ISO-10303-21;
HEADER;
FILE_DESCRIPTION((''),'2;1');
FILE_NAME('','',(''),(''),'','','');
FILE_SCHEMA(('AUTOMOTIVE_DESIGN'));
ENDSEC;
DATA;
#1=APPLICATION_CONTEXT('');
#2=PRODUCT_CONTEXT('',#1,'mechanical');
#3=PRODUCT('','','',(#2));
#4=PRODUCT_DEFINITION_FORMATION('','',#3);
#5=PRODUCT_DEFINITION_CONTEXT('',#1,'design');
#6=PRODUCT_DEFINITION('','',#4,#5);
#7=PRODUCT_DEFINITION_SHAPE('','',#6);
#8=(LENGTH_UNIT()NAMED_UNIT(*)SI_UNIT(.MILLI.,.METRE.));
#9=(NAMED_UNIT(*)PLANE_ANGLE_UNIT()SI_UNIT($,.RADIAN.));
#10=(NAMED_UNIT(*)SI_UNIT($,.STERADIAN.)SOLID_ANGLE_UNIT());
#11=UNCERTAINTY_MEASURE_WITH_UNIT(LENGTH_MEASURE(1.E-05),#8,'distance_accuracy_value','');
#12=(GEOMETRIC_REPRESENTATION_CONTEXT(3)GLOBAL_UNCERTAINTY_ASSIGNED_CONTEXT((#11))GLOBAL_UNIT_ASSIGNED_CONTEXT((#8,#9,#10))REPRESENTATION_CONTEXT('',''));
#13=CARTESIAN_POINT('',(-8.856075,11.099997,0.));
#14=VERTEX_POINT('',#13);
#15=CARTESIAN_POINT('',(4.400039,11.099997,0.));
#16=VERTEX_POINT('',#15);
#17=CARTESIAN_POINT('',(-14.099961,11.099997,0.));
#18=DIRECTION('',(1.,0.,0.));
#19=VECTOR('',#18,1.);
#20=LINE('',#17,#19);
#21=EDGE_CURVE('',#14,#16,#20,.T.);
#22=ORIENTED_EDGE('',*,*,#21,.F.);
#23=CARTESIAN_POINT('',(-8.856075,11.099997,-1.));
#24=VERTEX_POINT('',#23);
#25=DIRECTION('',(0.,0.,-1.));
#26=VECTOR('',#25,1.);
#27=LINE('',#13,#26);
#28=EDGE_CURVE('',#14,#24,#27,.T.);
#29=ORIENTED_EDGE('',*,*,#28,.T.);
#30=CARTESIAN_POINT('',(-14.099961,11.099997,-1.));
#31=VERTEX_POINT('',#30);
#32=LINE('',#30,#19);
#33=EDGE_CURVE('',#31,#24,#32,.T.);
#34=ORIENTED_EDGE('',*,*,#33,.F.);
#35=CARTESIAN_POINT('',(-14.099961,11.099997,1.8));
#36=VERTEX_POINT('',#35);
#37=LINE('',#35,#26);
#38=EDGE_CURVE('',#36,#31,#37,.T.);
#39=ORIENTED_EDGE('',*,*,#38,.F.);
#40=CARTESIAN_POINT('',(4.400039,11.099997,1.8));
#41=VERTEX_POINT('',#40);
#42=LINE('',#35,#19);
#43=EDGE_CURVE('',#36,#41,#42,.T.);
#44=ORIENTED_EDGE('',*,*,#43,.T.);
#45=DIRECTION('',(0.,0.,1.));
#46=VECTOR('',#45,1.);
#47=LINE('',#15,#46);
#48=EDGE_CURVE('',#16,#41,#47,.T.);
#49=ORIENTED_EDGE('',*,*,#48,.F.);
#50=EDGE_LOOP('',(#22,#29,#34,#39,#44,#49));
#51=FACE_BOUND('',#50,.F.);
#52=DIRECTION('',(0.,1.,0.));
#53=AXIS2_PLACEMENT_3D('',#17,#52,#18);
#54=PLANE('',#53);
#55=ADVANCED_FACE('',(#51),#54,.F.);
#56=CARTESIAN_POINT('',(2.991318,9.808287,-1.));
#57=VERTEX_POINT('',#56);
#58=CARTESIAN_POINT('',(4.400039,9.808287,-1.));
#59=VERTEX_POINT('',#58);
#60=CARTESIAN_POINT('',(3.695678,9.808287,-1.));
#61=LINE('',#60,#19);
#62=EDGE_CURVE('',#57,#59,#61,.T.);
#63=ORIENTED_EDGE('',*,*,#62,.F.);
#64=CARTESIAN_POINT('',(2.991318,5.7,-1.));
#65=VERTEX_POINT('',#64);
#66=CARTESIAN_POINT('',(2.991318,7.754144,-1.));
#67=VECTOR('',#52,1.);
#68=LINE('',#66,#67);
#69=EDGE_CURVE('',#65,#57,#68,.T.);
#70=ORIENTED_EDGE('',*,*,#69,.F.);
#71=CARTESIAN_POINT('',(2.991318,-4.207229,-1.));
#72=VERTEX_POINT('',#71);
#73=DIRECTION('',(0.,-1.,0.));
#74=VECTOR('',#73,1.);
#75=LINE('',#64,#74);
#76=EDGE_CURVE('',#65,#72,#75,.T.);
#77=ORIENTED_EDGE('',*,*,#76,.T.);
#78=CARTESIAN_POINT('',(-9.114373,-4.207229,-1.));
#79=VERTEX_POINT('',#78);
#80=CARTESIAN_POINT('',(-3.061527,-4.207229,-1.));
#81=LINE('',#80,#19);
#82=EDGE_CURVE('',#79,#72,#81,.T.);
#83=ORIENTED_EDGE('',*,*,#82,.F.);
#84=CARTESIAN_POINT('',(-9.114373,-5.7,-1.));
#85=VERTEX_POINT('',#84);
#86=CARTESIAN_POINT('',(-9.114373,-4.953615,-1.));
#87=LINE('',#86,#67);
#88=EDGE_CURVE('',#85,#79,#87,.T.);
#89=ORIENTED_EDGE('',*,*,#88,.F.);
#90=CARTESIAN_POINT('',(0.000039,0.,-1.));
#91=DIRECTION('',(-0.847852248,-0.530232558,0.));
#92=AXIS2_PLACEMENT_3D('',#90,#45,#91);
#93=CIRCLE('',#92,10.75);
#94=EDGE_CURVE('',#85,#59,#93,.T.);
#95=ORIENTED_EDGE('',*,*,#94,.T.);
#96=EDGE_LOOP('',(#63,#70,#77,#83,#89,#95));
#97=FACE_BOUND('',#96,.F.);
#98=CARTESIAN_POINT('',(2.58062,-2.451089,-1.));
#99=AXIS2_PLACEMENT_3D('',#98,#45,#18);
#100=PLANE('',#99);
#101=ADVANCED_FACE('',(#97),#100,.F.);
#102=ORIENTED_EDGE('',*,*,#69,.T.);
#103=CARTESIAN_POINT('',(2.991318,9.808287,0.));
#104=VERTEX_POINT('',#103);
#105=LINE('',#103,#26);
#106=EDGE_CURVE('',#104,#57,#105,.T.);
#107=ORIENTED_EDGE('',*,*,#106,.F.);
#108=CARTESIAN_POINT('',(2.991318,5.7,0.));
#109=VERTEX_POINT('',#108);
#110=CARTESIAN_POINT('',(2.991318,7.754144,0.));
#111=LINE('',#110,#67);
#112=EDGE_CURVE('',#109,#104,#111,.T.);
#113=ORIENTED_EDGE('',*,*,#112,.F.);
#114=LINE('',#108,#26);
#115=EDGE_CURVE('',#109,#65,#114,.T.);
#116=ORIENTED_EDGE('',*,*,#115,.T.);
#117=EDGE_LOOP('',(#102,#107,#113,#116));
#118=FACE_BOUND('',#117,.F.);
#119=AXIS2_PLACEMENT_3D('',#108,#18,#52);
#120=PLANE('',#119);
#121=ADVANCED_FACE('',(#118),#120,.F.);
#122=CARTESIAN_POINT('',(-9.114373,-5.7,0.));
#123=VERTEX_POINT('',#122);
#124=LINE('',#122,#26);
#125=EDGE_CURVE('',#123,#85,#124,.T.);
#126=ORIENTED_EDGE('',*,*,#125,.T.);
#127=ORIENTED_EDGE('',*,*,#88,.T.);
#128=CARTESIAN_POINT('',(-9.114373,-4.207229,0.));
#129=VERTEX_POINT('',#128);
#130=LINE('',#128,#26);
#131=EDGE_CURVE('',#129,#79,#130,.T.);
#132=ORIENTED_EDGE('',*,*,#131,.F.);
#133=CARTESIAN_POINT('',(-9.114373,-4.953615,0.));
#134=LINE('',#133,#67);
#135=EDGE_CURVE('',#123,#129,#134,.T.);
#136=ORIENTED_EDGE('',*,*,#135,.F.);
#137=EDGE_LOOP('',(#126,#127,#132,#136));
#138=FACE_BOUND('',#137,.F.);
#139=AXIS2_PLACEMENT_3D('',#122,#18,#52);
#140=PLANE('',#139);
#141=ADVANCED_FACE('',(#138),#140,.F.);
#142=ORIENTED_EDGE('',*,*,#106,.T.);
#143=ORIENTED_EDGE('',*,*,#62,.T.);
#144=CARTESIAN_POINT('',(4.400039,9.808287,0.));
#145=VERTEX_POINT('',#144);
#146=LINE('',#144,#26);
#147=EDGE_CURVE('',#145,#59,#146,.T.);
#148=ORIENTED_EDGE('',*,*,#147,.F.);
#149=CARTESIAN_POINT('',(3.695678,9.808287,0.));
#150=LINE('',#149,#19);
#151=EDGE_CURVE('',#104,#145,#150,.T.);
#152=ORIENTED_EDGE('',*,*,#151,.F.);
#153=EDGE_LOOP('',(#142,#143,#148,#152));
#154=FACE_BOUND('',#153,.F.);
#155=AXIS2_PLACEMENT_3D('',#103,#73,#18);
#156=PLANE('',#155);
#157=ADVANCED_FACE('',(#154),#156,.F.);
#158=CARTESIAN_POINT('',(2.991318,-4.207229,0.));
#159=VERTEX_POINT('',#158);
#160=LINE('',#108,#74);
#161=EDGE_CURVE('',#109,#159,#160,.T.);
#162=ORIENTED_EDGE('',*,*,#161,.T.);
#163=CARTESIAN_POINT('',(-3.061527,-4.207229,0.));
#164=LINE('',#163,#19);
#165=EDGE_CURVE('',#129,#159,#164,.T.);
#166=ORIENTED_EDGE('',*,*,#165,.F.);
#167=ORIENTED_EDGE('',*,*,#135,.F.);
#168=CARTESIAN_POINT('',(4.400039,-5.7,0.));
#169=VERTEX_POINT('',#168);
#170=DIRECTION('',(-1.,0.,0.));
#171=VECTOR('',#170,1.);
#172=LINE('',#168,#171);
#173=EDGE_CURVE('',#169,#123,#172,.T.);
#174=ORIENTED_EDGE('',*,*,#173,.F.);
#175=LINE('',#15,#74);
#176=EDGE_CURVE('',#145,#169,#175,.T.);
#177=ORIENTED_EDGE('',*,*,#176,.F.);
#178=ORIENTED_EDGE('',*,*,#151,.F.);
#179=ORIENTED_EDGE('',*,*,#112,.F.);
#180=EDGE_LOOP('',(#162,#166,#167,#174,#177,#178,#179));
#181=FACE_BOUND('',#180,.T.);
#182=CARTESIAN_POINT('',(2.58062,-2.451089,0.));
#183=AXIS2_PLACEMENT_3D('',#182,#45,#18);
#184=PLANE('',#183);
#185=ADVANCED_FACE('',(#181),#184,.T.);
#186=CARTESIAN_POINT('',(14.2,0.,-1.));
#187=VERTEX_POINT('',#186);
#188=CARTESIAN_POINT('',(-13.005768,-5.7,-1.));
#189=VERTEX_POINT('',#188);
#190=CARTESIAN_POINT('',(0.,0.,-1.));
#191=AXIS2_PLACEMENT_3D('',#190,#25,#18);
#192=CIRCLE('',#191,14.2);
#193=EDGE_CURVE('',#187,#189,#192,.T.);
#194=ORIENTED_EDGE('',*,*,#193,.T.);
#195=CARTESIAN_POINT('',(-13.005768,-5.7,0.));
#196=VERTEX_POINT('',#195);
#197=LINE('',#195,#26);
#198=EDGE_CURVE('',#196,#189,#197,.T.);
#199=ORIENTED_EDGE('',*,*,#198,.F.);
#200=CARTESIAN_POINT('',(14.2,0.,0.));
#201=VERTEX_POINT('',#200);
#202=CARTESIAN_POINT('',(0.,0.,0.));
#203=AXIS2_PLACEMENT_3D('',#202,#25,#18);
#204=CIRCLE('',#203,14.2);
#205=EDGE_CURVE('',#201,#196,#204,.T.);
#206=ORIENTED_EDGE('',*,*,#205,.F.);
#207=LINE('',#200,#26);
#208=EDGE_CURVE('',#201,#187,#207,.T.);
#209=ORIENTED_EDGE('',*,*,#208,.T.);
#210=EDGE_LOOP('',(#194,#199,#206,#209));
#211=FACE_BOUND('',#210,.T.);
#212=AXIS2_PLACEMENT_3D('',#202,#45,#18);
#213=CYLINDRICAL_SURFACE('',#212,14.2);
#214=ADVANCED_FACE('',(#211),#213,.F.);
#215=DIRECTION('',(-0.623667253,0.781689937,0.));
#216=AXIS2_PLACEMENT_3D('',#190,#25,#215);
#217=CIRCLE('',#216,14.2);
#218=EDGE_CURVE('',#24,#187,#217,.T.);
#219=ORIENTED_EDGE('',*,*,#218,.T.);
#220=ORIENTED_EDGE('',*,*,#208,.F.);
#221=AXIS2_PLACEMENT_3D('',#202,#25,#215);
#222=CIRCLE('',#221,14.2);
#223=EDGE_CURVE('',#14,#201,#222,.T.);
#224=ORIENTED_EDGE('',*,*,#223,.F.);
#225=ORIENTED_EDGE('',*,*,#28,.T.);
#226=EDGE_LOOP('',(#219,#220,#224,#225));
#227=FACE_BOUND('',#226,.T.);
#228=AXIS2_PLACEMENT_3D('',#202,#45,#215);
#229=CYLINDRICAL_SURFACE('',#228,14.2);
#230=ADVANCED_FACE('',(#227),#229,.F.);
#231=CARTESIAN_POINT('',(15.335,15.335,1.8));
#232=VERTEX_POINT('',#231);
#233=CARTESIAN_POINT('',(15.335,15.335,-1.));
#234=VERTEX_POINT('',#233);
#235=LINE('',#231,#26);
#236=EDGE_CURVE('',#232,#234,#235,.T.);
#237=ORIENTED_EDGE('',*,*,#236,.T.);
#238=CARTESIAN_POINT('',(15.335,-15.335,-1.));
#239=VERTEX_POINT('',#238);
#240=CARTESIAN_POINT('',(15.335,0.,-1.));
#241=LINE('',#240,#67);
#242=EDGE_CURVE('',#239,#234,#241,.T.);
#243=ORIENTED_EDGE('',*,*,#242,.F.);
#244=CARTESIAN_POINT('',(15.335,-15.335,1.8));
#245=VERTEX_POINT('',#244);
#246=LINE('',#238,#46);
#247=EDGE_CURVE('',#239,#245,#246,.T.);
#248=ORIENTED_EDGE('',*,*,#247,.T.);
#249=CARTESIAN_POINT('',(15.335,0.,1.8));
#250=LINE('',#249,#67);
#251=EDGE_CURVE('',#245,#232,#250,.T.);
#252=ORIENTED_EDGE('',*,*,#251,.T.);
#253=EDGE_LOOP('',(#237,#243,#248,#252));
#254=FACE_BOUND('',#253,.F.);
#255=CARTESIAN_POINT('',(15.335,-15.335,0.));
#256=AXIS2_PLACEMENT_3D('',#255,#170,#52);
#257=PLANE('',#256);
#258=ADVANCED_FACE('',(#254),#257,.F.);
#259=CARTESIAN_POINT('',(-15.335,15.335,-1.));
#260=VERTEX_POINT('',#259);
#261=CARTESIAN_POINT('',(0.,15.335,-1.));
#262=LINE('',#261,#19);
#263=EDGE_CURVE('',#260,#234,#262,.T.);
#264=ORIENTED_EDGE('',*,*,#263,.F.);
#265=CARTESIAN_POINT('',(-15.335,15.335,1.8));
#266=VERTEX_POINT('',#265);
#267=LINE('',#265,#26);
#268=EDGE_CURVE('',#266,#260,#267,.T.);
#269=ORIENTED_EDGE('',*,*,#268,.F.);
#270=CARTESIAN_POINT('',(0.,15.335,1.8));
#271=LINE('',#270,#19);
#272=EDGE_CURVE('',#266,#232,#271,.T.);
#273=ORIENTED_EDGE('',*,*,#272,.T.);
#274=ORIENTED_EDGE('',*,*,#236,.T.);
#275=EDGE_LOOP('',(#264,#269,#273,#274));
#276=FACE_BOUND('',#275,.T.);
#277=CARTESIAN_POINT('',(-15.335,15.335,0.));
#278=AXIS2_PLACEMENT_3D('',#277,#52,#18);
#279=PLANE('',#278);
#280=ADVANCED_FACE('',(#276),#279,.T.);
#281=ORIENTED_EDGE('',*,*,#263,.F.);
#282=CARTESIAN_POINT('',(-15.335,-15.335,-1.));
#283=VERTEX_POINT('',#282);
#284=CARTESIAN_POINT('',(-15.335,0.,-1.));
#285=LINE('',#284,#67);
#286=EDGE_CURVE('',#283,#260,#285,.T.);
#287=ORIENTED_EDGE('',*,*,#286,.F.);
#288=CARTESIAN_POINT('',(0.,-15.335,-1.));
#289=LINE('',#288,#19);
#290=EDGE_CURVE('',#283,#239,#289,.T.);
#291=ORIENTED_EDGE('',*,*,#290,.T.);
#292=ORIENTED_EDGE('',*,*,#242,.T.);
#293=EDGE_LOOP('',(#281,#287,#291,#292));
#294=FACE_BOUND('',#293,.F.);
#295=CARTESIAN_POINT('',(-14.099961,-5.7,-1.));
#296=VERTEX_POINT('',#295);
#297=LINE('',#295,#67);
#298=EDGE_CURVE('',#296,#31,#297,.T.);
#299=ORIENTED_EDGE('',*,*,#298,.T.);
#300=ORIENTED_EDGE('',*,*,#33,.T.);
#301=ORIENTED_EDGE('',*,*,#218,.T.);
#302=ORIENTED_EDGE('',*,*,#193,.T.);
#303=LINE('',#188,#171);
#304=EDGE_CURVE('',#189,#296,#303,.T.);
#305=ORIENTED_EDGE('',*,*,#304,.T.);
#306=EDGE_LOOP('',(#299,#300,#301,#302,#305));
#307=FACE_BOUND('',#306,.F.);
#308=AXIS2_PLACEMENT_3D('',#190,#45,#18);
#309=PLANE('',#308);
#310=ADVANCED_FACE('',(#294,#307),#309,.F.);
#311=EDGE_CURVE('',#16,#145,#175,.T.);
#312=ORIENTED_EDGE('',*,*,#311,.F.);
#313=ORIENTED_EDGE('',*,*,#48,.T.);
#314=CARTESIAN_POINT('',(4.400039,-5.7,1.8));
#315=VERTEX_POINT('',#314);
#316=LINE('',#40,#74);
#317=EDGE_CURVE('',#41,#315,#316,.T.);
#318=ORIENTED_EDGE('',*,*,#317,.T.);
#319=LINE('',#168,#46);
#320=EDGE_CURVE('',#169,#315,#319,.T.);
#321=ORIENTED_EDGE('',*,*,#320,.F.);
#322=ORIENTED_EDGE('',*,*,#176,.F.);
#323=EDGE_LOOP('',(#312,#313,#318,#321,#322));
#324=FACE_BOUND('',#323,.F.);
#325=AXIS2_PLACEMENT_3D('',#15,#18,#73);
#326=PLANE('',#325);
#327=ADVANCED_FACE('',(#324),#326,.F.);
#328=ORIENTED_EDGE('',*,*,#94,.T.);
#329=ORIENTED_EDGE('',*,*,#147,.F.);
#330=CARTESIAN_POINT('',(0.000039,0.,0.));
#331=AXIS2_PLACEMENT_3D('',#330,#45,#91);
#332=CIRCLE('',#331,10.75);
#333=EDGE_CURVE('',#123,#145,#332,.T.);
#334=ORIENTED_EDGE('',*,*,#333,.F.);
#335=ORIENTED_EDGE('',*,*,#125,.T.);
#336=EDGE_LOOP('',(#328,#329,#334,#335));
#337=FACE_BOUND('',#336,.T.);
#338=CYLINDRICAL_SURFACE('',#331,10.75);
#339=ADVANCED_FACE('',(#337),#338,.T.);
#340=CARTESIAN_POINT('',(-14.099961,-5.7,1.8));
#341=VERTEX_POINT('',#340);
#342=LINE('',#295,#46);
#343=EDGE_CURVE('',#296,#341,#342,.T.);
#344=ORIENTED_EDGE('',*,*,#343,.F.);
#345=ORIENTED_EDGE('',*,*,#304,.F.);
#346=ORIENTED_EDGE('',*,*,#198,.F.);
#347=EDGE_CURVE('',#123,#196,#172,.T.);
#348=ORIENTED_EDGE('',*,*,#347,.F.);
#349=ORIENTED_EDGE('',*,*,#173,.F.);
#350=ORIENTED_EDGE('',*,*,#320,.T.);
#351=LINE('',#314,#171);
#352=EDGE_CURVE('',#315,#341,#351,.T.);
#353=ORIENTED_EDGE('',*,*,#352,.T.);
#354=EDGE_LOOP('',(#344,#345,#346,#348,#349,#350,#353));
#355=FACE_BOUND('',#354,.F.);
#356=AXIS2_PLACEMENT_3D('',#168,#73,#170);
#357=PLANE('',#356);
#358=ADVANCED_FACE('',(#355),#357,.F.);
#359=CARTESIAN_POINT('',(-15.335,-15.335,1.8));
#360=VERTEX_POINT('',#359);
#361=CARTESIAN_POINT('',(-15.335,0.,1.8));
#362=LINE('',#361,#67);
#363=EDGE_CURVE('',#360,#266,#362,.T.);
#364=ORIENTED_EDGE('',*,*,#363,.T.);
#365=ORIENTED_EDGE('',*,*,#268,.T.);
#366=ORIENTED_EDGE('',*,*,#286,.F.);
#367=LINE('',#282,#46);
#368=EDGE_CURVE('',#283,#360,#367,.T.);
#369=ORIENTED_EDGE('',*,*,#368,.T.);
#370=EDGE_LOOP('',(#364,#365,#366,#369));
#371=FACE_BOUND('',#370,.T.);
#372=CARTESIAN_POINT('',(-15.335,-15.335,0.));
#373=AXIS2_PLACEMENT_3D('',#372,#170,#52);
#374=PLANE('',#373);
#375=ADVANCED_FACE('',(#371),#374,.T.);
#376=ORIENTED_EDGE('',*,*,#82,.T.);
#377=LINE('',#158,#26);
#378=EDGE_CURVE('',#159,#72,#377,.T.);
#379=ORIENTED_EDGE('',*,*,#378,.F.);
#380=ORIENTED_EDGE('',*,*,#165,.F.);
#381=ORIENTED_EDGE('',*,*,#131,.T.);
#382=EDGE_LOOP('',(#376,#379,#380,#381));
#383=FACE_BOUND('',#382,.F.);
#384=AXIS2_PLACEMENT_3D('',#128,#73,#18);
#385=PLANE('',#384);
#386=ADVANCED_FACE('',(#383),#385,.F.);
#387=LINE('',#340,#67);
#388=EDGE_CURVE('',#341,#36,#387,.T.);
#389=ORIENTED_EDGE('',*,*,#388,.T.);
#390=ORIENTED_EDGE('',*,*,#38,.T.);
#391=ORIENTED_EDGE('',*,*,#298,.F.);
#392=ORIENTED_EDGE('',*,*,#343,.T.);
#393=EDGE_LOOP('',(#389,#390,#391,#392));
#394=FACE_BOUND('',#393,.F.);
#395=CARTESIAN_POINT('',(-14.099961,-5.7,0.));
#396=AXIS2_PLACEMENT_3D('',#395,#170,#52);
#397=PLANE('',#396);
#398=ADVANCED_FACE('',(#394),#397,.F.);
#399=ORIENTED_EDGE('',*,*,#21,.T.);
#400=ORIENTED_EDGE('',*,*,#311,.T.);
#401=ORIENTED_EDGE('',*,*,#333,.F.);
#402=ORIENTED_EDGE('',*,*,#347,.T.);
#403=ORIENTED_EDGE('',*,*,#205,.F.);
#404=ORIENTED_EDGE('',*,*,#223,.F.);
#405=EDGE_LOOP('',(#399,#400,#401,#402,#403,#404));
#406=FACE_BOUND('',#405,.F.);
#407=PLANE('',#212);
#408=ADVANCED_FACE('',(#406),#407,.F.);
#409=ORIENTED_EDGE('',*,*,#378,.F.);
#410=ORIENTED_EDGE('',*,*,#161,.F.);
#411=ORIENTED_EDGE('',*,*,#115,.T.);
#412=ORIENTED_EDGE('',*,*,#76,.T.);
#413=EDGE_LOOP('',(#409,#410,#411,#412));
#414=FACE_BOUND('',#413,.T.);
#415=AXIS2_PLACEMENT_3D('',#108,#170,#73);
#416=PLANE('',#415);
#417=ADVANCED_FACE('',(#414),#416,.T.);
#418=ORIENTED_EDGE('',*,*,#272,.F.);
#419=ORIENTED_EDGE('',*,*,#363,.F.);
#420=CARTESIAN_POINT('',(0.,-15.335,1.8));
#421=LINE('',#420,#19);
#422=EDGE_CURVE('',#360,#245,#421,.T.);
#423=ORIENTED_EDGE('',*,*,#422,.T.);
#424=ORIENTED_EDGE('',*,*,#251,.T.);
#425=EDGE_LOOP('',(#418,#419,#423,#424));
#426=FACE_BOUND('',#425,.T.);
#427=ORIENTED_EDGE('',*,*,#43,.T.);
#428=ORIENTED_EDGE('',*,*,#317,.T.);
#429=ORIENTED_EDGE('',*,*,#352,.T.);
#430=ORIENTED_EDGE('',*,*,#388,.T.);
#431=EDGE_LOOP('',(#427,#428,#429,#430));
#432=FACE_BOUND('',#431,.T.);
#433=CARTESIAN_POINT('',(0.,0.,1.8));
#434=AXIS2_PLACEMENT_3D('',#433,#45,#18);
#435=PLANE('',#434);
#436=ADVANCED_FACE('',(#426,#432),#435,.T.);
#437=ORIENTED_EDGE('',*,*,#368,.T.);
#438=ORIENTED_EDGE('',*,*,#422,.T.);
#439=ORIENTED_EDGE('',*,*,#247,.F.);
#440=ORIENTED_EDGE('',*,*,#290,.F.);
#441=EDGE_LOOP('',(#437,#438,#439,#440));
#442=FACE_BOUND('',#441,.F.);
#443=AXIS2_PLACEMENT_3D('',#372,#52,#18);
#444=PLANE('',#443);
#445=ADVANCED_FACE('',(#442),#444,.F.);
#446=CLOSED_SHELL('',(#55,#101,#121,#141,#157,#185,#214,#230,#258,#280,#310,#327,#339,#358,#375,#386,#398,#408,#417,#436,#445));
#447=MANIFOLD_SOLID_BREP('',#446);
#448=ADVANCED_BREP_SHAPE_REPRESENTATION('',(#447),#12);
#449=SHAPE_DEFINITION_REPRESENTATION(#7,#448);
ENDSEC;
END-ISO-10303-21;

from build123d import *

# Parameters (mm, degrees)
F0_W     = 30.67
F0_H     = 30.67
F1_DEPTH = 1
F0_W_2   = 12.1056904889
F0_H_2   = 1.4927708568
F0_W_3   = 1.4087211761
F0_H_3   = 4.1082873123
F2_DEPTH = 1.8


# Not quite as in the source:
# - a feature names something its author has since deleted; it is built from what else it names


with BuildPart() as f1:
    # F0 (on Top) → F1 (new body)
    with BuildSketch(Plane.XY):
        Rectangle(F0_W, F0_H)
        with BuildLine():
            ThreePointArc((-8.8560749891, 11.0999971075), (6.1596970362, 12.7944570976), (14.2, 0))
            ThreePointArc((14.2, 0), (2.9118804142, -13.8982355878), (-13.0057679512, -5.7))
            Line((-13.0057679512, -5.7), (-14.0999610525, -5.7))
            Line((-14.0999610525, -5.7), (-14.0999610525, -1.6825867938))
            ThreePointArc((-14.0999610525, -1.6825867938), (-14.2, 0), (-14.0999610525, 1.6825867938))
            Line((-14.0999610525, 1.6825867938), (-14.0999610525, 5.7))
            Line((-14.0999610525, 5.7), (-14.0999610525, 11.0999971075))
            Line((-14.0999610525, 11.0999971075), (-8.8560749891, 11.0999971075))
        make_face(mode=Mode.SUBTRACT)
        with BuildLine():
            ThreePointArc((-14.0999610525, 1.6825867938), (-14.2, 0), (-14.0999610525, -1.6825867938))
            Line((-14.0999610525, -1.6825867938), (-14.0999610525, 1.6825867938))
        make_face()
    extrude(amount=-F1_DEPTH)



with BuildPart() as f1b:
    # F0 (on Top) → F1, piece 2 (new body)
    with BuildSketch(Plane.XY):
        with BuildLine():
            Line((2.9913177714, -5.7), (-9.1143727175, -5.7))
            ThreePointArc((-9.1143727175, -5.7), (-3.1266086976, -10.2852600601), (4.4000389475, -9.8082873123))
            ThreePointArc((4.4000389475, -9.8082873123), (10.7500389475, 0), (4.4000389475, 9.8082873123))
            Line((4.4000389475, 9.8082873123), (4.4000389475, 5.7))
            Line((4.4000389475, 5.7), (4.4000389475, 4.2072320357))
            Line((4.4000389475, 4.2072320357), (4.4000389475, -4.2072320357))
            Line((4.4000389475, -4.2072320357), (4.4000389475, -5.7))
            Line((4.4000389475, -5.7), (2.9913177714, -5.7))
        make_face()
        Polygon((2.9913177714, -4.2072291432), (2.9913177714, -5.7), (4.4000389475, -5.7), (4.4000389475, -4.2072320357), (4.4000389475, 4.2072320357), (4.4000389475, 5.7), (2.9913177714, 5.7), (2.9913177714, 4.2072291432), align=None)
        with Locations((-3.0615274731, -4.9536145716)):
            Rectangle(F0_W_2, F0_H_2)
        Polygon((2.9913177714, -4.2072291432), (2.9913177714, -5.7), (4.4000389475, -5.7), (4.4000389475, -4.2072320357), (4.4000389475, 4.2072320357), (4.4000389475, 5.7), (2.9913177714, 5.7), (2.9913177714, 4.2072291432), align=None)
        with Locations((3.6956783594, 7.7541436561)):
            Rectangle(F0_W_3, F0_H_3)
    extrude(amount=-F1_DEPTH)


with BuildPart() as f1_1:
    add(f1.part)

    add(f1b.part)  # F2 merges F1b
    # F0 (on Top) → F2 (join)
    with BuildSketch(Plane.XY):
        Rectangle(F0_W, F0_H)
        with BuildLine():
            ThreePointArc((-8.8560749891, 11.0999971075), (6.1596970362, 12.7944570976), (14.2, 0))
            ThreePointArc((14.2, 0), (2.9118804142, -13.8982355878), (-13.0057679512, -5.7))
            Line((-13.0057679512, -5.7), (-14.0999610525, -5.7))
            Line((-14.0999610525, -5.7), (-14.0999610525, -1.6825867938))
            ThreePointArc((-14.0999610525, -1.6825867938), (-14.2, 0), (-14.0999610525, 1.6825867938))
            Line((-14.0999610525, 1.6825867938), (-14.0999610525, 5.7))
            Line((-14.0999610525, 5.7), (-14.0999610525, 11.0999971075))
            Line((-14.0999610525, 11.0999971075), (-8.8560749891, 11.0999971075))
        make_face(mode=Mode.SUBTRACT)
        with BuildLine():
            ThreePointArc((-13.0057679512, -5.7), (2.9118804142, -13.8982355878), (14.2, 0))
            ThreePointArc((14.2, 0), (6.1596970362, 12.7944570976), (-8.8560749891, 11.0999971075))
            Line((-8.8560749891, 11.0999971075), (2.9913177714, 11.0999971075))
            Line((2.9913177714, 11.0999971075), (4.4000389475, 11.0999971075))
            Line((4.4000389475, 11.0999971075), (4.4000389475, 9.8082873123))
            ThreePointArc((4.4000389475, 9.8082873123), (10.7500389475, 0), (4.4000389475, -9.8082873123))
            ThreePointArc((4.4000389475, -9.8082873123), (-3.1266086976, -10.2852600601), (-9.1143727175, -5.7))
            Line((-9.1143727175, -5.7), (-13.0057679512, -5.7))
        make_face()
        with BuildLine():
            Line((2.9913177714, -5.7), (-9.1143727175, -5.7))
            ThreePointArc((-9.1143727175, -5.7), (-3.1266086976, -10.2852600601), (4.4000389475, -9.8082873123))
            ThreePointArc((4.4000389475, -9.8082873123), (10.7500389475, 0), (4.4000389475, 9.8082873123))
            Line((4.4000389475, 9.8082873123), (4.4000389475, 5.7))
            Line((4.4000389475, 5.7), (4.4000389475, 4.2072320357))
            Line((4.4000389475, 4.2072320357), (4.4000389475, -4.2072320357))
            Line((4.4000389475, -4.2072320357), (4.4000389475, -5.7))
            Line((4.4000389475, -5.7), (2.9913177714, -5.7))
        make_face()
        with BuildLine():
            ThreePointArc((-14.0999610525, 1.6825867938), (-14.2, 0), (-14.0999610525, -1.6825867938))
            Line((-14.0999610525, -1.6825867938), (-14.0999610525, 1.6825867938))
        make_face()
    extrude(amount=F2_DEPTH)


solid = f1_1.part
